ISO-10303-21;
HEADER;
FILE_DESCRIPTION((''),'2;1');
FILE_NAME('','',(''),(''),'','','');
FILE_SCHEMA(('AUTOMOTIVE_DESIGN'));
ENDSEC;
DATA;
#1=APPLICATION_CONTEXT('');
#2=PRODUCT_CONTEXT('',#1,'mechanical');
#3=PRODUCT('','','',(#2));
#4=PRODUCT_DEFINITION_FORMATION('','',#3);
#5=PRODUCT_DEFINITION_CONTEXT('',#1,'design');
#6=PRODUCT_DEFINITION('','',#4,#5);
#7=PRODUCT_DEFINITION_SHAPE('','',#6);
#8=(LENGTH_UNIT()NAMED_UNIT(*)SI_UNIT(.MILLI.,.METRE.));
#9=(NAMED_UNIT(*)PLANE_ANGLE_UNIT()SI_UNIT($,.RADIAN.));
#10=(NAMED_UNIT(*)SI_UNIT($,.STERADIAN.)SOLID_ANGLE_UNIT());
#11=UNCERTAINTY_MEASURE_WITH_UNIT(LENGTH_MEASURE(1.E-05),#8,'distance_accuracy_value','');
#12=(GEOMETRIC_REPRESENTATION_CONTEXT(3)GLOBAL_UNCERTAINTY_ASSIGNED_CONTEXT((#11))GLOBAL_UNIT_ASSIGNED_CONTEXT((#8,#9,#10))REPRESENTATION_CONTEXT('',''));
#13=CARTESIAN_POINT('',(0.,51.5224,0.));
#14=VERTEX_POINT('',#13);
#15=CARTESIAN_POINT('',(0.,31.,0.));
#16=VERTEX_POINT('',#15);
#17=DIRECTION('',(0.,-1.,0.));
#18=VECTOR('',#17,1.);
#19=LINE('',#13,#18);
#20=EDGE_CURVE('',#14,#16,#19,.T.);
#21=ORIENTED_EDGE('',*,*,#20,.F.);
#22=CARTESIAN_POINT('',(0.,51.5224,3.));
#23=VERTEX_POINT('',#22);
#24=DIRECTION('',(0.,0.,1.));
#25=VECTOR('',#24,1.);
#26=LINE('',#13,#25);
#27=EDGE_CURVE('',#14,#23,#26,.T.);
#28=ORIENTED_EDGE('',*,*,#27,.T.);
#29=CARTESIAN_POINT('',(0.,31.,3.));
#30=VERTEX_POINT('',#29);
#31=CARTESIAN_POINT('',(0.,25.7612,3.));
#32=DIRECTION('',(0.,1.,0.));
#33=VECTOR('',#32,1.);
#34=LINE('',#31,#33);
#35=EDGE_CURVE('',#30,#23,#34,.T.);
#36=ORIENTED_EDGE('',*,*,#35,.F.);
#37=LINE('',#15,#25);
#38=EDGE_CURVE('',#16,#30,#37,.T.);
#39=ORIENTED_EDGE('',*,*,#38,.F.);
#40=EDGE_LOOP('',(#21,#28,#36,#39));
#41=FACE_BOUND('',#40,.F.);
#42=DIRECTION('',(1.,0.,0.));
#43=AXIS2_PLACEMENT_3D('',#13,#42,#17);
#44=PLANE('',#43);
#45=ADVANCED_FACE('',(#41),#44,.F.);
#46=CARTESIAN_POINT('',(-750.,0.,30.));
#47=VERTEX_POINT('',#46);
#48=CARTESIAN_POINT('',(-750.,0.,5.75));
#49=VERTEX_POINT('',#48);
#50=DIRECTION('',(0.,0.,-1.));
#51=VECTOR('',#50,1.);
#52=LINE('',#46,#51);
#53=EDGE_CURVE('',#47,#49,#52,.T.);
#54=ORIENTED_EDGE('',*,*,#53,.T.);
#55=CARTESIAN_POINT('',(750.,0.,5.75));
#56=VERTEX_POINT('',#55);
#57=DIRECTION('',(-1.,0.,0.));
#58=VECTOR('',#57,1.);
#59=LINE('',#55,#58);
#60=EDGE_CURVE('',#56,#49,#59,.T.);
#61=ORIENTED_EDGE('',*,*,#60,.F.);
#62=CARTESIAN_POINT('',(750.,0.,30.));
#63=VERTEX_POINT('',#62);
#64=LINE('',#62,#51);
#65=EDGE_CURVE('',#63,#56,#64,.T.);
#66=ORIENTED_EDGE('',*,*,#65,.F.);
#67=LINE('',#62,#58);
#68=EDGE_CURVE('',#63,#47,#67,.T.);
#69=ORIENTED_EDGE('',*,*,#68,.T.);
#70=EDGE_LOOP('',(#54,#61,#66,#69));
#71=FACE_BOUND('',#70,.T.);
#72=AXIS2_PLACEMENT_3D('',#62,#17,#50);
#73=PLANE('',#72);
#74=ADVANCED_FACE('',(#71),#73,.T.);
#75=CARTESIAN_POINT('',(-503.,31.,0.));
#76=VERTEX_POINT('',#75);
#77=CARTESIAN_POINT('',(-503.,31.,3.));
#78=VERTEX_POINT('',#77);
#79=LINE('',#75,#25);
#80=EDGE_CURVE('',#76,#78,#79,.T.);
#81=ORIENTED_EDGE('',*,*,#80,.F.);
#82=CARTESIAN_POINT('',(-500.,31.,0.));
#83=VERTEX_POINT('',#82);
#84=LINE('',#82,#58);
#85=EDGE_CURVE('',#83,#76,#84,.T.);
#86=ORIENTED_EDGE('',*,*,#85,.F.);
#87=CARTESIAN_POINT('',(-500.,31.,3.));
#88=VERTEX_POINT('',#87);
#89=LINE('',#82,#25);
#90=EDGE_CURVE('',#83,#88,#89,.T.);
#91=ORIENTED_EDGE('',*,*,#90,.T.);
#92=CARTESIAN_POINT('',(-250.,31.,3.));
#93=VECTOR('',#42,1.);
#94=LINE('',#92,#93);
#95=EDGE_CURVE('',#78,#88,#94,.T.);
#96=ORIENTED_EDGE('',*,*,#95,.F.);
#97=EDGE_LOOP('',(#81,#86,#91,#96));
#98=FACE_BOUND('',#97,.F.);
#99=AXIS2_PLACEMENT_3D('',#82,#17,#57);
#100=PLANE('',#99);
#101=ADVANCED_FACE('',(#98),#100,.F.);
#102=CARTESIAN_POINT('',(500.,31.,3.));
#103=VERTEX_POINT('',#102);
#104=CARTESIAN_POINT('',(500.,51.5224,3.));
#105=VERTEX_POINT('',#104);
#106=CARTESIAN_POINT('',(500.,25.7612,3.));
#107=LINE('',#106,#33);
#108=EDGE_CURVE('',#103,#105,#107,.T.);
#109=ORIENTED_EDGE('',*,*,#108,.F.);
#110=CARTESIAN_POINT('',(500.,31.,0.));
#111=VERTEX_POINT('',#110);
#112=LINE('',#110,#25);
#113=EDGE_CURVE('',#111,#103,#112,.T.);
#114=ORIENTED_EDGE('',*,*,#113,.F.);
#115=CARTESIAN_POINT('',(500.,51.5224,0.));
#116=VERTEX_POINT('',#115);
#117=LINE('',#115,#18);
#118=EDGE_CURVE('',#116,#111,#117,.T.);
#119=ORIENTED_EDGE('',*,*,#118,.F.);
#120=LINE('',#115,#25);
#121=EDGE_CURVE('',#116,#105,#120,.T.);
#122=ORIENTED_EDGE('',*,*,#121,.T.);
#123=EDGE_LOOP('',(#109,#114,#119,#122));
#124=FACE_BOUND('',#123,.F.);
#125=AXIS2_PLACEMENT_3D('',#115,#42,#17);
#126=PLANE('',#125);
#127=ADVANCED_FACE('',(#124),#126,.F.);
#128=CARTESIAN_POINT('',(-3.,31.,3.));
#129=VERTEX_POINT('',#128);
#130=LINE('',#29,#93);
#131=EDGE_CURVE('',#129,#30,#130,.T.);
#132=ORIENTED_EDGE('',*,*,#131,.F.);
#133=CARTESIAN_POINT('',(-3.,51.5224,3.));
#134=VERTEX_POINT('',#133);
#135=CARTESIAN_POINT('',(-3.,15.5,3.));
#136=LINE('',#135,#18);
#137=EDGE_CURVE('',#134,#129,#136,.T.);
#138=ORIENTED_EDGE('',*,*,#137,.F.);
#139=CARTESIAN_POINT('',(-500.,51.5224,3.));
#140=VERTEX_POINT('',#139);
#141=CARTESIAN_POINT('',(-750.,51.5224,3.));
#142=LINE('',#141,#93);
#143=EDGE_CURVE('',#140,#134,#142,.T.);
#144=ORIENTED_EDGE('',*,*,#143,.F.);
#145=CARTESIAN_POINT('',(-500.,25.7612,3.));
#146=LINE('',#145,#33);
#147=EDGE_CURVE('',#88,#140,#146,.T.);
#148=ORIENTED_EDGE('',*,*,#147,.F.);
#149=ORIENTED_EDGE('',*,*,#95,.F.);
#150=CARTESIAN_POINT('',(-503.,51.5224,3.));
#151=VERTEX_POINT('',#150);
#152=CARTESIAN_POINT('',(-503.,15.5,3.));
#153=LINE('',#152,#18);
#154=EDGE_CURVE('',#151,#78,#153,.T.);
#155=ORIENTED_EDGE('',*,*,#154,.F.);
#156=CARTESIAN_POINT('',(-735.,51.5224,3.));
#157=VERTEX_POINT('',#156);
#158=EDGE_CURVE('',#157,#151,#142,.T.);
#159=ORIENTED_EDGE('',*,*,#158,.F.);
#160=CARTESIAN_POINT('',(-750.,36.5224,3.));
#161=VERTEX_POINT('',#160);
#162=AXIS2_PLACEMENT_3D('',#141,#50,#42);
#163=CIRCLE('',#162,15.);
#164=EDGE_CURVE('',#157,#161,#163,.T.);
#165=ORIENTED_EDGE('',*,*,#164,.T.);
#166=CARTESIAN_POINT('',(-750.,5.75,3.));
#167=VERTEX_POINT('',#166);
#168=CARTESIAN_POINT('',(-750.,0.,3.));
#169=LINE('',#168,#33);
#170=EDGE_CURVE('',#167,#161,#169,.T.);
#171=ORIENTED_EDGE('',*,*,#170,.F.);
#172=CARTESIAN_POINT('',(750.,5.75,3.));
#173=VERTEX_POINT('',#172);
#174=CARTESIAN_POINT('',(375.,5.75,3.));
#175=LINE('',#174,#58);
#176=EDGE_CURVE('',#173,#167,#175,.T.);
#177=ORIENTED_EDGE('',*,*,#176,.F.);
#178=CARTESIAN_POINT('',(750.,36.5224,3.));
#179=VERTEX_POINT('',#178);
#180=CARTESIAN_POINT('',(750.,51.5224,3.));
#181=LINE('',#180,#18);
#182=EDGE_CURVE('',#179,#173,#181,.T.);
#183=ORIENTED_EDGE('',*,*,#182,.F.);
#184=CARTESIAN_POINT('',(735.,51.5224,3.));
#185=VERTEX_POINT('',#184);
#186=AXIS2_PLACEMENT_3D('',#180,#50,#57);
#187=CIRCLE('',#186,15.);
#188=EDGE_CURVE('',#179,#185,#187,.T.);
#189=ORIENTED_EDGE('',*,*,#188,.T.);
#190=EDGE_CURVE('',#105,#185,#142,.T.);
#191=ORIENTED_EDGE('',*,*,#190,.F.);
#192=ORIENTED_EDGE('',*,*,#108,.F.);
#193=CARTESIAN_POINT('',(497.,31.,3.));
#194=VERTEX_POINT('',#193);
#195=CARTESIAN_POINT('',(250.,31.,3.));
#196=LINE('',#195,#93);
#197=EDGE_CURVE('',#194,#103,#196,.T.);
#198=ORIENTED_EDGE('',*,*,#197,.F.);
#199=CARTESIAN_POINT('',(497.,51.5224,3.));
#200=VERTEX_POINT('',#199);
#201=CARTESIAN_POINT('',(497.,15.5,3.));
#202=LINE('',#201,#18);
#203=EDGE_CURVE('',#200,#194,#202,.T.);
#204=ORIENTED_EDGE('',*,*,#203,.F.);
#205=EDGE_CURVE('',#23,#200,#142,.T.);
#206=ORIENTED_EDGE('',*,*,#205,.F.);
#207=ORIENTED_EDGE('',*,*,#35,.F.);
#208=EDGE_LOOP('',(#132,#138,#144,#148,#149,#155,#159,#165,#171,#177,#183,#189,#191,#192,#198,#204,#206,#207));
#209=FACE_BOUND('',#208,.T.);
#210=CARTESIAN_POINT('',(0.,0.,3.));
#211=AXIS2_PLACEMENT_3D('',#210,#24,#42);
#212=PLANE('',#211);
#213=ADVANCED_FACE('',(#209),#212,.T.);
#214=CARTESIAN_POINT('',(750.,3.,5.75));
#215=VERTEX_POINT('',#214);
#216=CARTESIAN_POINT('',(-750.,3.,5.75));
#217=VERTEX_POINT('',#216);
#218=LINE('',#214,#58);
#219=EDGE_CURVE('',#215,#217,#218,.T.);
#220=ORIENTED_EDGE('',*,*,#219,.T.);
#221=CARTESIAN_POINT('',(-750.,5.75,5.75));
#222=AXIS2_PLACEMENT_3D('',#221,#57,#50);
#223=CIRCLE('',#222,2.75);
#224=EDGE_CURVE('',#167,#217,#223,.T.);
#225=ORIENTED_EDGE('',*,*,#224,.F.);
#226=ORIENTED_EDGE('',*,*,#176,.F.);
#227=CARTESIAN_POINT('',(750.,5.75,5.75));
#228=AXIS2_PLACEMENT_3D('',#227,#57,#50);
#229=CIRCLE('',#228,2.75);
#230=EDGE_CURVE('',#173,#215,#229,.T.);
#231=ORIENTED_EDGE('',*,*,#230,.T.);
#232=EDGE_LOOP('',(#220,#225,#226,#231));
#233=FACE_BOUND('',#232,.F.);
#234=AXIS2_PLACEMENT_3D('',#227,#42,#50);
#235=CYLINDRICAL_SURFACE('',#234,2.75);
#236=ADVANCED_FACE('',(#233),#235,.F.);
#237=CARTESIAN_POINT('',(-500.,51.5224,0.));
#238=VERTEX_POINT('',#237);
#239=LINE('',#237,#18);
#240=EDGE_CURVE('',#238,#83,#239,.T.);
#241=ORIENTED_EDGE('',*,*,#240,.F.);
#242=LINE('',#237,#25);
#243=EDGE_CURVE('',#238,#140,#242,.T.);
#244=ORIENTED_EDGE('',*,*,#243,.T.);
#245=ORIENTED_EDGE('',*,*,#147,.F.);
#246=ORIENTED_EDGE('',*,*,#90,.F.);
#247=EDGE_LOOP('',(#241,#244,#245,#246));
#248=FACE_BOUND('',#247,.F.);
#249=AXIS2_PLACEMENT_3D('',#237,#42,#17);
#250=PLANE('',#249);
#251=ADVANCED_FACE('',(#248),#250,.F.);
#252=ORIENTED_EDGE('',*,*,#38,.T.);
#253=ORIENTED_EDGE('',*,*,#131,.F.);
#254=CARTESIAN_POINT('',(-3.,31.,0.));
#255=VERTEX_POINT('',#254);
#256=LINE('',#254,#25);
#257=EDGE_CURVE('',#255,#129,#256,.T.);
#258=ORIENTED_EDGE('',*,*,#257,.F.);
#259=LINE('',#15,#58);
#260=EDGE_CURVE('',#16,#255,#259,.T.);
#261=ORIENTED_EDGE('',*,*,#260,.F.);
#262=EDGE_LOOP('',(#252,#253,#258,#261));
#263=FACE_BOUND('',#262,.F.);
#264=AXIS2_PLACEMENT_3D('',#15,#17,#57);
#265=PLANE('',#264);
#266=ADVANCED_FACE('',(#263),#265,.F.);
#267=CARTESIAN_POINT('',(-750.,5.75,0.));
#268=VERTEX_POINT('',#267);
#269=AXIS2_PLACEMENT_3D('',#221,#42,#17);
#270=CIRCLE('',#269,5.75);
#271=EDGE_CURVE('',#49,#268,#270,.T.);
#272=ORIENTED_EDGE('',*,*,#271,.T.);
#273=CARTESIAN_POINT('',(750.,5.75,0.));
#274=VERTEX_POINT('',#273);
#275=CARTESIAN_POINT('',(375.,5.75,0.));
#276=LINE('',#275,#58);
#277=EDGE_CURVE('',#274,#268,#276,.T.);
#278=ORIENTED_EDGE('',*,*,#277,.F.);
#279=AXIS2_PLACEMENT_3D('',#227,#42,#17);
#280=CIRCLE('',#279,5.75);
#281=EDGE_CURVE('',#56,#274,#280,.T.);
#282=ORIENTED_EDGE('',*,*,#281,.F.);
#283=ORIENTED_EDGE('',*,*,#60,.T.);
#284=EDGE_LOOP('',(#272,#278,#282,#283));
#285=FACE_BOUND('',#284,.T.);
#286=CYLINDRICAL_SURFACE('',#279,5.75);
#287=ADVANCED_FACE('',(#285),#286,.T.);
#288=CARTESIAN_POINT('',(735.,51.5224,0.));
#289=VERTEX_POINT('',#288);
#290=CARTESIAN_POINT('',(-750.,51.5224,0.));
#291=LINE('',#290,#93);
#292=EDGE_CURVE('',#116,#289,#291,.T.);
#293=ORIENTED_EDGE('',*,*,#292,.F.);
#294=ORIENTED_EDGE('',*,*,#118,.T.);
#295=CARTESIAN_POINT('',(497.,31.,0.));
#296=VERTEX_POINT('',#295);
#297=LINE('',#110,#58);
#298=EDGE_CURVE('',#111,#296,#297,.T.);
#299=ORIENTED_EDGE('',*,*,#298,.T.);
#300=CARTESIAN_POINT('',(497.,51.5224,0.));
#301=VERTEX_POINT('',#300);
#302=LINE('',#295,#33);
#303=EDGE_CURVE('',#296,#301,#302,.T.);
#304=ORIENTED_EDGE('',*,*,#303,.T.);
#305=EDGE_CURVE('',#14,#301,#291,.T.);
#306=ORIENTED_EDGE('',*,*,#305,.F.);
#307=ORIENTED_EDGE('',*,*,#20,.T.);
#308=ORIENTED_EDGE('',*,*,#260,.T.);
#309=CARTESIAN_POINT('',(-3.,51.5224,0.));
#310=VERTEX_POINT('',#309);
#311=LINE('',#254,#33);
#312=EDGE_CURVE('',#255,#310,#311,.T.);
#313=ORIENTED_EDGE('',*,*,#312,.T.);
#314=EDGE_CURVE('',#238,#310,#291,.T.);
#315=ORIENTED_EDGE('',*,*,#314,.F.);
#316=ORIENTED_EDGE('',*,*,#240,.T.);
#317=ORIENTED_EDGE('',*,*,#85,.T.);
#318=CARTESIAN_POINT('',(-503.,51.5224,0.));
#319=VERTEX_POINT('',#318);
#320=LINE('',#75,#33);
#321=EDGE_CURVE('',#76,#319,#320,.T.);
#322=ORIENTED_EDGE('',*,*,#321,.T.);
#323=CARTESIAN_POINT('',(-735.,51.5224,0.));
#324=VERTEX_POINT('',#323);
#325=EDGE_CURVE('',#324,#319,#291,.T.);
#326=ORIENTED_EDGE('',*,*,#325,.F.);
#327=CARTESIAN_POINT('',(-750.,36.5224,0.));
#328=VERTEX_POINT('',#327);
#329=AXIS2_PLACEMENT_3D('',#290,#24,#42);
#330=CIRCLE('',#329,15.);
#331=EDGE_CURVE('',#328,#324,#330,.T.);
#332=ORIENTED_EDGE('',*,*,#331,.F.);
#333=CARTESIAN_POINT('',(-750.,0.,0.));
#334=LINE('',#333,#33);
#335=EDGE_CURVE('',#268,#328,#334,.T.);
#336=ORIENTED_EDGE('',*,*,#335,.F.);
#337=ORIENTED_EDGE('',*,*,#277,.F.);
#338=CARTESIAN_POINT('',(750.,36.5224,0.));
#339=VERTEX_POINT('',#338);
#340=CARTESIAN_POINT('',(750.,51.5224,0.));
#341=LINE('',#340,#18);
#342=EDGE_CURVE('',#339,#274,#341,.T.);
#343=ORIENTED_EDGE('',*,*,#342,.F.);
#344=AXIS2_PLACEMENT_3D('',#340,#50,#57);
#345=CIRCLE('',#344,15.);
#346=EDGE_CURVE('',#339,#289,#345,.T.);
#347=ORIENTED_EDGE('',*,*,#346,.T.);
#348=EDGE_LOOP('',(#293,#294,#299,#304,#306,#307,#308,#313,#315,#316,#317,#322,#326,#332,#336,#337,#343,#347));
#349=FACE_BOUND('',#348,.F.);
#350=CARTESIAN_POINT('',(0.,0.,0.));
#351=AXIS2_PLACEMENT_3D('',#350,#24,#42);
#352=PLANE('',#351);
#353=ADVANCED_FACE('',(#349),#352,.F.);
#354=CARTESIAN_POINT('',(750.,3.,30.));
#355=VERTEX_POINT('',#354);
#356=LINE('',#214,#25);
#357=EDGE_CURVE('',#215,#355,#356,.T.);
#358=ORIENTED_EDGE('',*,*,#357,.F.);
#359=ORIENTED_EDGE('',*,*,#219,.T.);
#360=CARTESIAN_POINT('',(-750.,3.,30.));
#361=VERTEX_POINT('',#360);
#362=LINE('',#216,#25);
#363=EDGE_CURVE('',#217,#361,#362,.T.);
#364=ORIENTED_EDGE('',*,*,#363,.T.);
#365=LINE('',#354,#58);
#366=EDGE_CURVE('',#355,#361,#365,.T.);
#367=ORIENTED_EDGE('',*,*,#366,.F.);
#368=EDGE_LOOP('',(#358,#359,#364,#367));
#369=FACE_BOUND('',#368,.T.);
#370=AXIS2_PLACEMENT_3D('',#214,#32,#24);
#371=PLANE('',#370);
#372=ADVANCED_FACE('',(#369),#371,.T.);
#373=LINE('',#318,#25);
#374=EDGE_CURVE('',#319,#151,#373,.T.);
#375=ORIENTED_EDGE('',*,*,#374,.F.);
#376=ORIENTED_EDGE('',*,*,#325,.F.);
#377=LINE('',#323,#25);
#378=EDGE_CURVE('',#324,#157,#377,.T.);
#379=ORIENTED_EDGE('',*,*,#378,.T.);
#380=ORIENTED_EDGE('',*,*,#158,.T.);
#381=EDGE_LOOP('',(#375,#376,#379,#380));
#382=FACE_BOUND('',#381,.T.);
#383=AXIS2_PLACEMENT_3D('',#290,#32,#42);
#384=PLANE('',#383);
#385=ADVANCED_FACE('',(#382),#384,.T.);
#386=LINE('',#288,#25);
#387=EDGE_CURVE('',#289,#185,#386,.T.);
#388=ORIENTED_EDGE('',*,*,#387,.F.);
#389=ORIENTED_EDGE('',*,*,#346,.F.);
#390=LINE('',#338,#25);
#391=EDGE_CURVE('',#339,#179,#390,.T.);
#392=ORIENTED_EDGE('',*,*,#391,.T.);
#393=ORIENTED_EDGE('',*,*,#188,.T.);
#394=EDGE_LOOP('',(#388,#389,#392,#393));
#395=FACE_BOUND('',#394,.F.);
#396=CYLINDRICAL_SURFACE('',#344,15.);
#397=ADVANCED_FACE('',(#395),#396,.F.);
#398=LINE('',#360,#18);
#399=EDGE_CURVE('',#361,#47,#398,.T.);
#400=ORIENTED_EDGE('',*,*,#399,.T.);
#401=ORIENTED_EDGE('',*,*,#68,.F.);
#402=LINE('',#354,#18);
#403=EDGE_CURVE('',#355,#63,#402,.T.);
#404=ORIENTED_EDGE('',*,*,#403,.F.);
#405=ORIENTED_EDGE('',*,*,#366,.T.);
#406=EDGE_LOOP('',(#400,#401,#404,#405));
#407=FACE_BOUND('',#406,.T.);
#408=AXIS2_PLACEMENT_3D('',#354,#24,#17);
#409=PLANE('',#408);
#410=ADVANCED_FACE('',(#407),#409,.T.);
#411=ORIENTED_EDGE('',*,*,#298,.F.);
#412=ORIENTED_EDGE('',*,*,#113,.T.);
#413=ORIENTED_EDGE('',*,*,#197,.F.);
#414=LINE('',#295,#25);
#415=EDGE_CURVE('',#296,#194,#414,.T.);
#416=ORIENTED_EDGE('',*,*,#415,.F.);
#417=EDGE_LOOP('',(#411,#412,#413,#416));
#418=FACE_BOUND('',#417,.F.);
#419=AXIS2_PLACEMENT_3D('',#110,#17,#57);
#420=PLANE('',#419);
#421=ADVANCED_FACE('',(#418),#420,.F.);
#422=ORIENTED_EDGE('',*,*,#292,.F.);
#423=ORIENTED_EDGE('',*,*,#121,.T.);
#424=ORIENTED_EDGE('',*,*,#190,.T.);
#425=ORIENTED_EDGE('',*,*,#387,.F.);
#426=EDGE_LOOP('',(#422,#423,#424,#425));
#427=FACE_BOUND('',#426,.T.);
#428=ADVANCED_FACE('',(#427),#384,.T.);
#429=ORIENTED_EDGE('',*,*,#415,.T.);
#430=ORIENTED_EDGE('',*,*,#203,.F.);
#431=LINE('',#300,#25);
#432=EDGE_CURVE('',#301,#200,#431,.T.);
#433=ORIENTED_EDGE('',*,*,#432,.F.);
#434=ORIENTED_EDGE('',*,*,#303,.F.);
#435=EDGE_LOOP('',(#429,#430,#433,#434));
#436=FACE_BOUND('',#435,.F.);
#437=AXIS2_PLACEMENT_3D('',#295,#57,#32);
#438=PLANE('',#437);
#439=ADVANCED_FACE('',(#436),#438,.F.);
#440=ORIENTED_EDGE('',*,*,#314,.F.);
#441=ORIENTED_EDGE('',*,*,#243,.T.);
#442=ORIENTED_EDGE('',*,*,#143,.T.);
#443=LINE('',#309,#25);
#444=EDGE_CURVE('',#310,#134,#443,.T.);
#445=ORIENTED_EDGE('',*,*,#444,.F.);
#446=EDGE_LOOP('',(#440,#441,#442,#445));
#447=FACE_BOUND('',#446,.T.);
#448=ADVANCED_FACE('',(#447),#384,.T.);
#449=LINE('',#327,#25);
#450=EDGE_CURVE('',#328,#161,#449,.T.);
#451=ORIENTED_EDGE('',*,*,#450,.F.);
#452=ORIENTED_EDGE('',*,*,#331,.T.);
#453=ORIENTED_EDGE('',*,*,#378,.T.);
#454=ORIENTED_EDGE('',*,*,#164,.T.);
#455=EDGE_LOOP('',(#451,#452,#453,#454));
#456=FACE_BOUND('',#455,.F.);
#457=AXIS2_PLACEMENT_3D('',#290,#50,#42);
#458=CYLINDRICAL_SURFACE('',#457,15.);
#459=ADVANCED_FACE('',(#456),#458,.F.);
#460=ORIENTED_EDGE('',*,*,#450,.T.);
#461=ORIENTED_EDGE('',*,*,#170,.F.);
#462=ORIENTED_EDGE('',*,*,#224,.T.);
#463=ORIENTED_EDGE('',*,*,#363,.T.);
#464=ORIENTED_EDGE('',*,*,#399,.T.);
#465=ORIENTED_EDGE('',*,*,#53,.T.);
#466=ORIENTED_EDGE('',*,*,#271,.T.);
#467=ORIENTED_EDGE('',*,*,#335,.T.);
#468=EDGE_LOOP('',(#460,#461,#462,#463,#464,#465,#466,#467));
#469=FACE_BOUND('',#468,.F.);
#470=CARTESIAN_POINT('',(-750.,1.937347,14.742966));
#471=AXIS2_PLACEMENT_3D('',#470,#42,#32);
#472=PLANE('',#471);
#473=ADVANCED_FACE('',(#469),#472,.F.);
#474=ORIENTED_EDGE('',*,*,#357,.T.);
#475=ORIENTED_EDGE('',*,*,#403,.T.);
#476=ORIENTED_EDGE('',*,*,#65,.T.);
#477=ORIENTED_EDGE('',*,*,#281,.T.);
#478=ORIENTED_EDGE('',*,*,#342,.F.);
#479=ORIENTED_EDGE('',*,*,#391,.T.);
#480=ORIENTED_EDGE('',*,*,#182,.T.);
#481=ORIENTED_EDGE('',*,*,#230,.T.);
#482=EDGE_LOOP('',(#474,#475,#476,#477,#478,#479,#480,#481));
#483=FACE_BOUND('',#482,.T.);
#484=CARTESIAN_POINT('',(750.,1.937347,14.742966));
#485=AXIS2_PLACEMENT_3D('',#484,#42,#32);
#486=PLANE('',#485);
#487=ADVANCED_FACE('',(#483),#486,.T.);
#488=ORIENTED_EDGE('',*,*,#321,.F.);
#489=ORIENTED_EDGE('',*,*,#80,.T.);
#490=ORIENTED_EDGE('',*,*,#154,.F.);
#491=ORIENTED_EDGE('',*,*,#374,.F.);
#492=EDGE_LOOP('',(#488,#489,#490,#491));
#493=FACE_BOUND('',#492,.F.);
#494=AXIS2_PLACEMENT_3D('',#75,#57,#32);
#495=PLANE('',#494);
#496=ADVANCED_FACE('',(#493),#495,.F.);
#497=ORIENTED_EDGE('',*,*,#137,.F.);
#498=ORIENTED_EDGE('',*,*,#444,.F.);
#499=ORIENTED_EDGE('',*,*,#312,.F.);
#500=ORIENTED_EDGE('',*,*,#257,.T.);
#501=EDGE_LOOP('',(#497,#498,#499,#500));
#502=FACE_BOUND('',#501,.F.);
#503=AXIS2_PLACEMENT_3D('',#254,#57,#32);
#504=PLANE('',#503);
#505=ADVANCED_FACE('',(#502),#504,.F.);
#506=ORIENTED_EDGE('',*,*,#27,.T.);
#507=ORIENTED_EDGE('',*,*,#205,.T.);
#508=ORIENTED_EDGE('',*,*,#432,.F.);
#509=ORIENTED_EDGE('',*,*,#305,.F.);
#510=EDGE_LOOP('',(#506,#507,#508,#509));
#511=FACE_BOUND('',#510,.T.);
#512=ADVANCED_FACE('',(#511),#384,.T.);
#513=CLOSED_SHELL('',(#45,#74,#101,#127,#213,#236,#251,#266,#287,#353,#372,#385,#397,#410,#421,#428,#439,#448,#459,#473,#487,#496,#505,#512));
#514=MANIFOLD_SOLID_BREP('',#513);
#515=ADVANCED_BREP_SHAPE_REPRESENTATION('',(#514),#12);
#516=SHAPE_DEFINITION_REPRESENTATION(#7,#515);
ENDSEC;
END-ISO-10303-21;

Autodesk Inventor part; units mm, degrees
ref_plane "YZ Plane" through (0, 0, 0) normal (1, 0, 0) x (0, 1, 0)
ref_plane "XZ Plane" through (0, 0, 0) normal (0, 1, 0) x (-1, 0, 0)
ref_plane "XY Plane" through (0, 0, 0) normal (0, 0, 1) x (1, 0, 0)
sketch "Sketch1" plane through (0, 0, 0) normal (0, 0, 1) x (1, 0, 0)
  line L0 (-750, 51.5224) -> (750, 51.5224)
  line L1 (750, 51.5224) -> (750, 0)
  line L2 (750, 0) -> (-750, 0)
  line L3 (-750, 0) -> (-750, 51.5224)
  point P0 (0, 0)
  point P1 (0, 0)
  dimension "d0" = 1500
  dimension "d1" = 51.5224
extrude "Plate1" add sketch "Sketch1" along normal blind 3
sketch "Sketch2" plane through (750, 3, 0) normal (0, -1, 0) x (1, 0, 0)
  line L0 (-1500, 0) -> (0, 0)
  line L1 (0, 0) -> (0, 30)
  line L2 (0, 30) -> (-1500, 30)
  line L3 (-1500, 30) -> (-1500, 0)
edge flange "Flange1" height 30 angle 90 thickness 3 bend radius 2.75 thickness toward (0, -1, 0) relief tear relief width 3 relief depth 1.5 edges at (0, 0, 3) wall of the first edge with corners at (-750, 3, 0) (750, 3, 0) (750, 3, 30) (-750, 3, 30)
bend "Bend1"
corner "Corner1"
sketch "Sketch5" plane through (0, 0, 0) normal (0, 0, -1) x (-1, 0, 0)
  line L0 (750, 51.5224) -> (-750, 51.5224) projected
  line L1 (500, 51.5224) -> (500, 31)
  line L2 (500, 31) -> (503, 31)
  line L3 (503, 31) -> (503, 51.5224)
  line L4 (750, 0) -> (-750, 0) projected
  point P0 (0, 0)
  dimension "d18" = 3
  dimension "d19" = 247
  dimension "d20" = 31
extrude "Extrusion1" cut sketch "Sketch5" against normal through all
pattern_linear "Rectangular Pattern1" count 3 spacing 500 along (1, 0, 0) of "Extrusion1"
sketch "Sketch6" plane through (0, 0, 0) normal (0, 0, -1) x (-1, 0, 0)
  line L0 (-750, 51.5224) -> (-750, 5.75) projected
  circle A0 centre (-750, 51.5224) radius 15
  line L1 (-750, 51.5224) -> (-500, 51.5224) projected
  point P0 (0, 0)
  point P1 (-735, 51.5224)
  point P2 (-750, 36.5224)
  dimension "d24" = 30
extrude "Extrusion2" cut sketch "Sketch6" against normal through all contours L1 A0 L0 picked at (-740.1254, 50.4098)
mirror "Mirror1" about plane through (0, 0, 0) normal (1, 0, 0) of "Extrusion2"
equation "\"d1\" = Стрингер_5"
equation "\"d18\" = Thickness"
equation "\"d2\" = Thickness"
equation "\"d3\" = BendReliefWidth"
equation "\"d4\" = BendReliefDepth"
equation "\"d5\" = MinimumRemnant"
equation "\"d6\" = TransitionRadius"
equation "\"d9\" = BendRadius"
equation "\"d10\" = CornerReliefSize"
equation "\"d11\" = GapSize"
equation "\"d12\" = JacobiRadiusSize"
equation "\"BendReliefWidth\" = Thickness"
equation "\"BendReliefDepth\" = 0.5 * Thickness"
equation "\"CornerReliefSize\" = 4 * Thickness"
equation "\"MinimumRemnant\" = 2 * Thickness"
equation "\"TransitionRadius\" = BendRadius"
equation "\"JacobiRadiusSize\" = BendRadius"
equation "\"GapSize\" = Thickness"
equation "\"Стрингер_5\" = 51.522376"
equation "\"Thickness\" = 3"
equation "\"BendRadius\" = 2.75"
properties part number "МОО 055 стрингер борт 5" material "Stainless Steel"
